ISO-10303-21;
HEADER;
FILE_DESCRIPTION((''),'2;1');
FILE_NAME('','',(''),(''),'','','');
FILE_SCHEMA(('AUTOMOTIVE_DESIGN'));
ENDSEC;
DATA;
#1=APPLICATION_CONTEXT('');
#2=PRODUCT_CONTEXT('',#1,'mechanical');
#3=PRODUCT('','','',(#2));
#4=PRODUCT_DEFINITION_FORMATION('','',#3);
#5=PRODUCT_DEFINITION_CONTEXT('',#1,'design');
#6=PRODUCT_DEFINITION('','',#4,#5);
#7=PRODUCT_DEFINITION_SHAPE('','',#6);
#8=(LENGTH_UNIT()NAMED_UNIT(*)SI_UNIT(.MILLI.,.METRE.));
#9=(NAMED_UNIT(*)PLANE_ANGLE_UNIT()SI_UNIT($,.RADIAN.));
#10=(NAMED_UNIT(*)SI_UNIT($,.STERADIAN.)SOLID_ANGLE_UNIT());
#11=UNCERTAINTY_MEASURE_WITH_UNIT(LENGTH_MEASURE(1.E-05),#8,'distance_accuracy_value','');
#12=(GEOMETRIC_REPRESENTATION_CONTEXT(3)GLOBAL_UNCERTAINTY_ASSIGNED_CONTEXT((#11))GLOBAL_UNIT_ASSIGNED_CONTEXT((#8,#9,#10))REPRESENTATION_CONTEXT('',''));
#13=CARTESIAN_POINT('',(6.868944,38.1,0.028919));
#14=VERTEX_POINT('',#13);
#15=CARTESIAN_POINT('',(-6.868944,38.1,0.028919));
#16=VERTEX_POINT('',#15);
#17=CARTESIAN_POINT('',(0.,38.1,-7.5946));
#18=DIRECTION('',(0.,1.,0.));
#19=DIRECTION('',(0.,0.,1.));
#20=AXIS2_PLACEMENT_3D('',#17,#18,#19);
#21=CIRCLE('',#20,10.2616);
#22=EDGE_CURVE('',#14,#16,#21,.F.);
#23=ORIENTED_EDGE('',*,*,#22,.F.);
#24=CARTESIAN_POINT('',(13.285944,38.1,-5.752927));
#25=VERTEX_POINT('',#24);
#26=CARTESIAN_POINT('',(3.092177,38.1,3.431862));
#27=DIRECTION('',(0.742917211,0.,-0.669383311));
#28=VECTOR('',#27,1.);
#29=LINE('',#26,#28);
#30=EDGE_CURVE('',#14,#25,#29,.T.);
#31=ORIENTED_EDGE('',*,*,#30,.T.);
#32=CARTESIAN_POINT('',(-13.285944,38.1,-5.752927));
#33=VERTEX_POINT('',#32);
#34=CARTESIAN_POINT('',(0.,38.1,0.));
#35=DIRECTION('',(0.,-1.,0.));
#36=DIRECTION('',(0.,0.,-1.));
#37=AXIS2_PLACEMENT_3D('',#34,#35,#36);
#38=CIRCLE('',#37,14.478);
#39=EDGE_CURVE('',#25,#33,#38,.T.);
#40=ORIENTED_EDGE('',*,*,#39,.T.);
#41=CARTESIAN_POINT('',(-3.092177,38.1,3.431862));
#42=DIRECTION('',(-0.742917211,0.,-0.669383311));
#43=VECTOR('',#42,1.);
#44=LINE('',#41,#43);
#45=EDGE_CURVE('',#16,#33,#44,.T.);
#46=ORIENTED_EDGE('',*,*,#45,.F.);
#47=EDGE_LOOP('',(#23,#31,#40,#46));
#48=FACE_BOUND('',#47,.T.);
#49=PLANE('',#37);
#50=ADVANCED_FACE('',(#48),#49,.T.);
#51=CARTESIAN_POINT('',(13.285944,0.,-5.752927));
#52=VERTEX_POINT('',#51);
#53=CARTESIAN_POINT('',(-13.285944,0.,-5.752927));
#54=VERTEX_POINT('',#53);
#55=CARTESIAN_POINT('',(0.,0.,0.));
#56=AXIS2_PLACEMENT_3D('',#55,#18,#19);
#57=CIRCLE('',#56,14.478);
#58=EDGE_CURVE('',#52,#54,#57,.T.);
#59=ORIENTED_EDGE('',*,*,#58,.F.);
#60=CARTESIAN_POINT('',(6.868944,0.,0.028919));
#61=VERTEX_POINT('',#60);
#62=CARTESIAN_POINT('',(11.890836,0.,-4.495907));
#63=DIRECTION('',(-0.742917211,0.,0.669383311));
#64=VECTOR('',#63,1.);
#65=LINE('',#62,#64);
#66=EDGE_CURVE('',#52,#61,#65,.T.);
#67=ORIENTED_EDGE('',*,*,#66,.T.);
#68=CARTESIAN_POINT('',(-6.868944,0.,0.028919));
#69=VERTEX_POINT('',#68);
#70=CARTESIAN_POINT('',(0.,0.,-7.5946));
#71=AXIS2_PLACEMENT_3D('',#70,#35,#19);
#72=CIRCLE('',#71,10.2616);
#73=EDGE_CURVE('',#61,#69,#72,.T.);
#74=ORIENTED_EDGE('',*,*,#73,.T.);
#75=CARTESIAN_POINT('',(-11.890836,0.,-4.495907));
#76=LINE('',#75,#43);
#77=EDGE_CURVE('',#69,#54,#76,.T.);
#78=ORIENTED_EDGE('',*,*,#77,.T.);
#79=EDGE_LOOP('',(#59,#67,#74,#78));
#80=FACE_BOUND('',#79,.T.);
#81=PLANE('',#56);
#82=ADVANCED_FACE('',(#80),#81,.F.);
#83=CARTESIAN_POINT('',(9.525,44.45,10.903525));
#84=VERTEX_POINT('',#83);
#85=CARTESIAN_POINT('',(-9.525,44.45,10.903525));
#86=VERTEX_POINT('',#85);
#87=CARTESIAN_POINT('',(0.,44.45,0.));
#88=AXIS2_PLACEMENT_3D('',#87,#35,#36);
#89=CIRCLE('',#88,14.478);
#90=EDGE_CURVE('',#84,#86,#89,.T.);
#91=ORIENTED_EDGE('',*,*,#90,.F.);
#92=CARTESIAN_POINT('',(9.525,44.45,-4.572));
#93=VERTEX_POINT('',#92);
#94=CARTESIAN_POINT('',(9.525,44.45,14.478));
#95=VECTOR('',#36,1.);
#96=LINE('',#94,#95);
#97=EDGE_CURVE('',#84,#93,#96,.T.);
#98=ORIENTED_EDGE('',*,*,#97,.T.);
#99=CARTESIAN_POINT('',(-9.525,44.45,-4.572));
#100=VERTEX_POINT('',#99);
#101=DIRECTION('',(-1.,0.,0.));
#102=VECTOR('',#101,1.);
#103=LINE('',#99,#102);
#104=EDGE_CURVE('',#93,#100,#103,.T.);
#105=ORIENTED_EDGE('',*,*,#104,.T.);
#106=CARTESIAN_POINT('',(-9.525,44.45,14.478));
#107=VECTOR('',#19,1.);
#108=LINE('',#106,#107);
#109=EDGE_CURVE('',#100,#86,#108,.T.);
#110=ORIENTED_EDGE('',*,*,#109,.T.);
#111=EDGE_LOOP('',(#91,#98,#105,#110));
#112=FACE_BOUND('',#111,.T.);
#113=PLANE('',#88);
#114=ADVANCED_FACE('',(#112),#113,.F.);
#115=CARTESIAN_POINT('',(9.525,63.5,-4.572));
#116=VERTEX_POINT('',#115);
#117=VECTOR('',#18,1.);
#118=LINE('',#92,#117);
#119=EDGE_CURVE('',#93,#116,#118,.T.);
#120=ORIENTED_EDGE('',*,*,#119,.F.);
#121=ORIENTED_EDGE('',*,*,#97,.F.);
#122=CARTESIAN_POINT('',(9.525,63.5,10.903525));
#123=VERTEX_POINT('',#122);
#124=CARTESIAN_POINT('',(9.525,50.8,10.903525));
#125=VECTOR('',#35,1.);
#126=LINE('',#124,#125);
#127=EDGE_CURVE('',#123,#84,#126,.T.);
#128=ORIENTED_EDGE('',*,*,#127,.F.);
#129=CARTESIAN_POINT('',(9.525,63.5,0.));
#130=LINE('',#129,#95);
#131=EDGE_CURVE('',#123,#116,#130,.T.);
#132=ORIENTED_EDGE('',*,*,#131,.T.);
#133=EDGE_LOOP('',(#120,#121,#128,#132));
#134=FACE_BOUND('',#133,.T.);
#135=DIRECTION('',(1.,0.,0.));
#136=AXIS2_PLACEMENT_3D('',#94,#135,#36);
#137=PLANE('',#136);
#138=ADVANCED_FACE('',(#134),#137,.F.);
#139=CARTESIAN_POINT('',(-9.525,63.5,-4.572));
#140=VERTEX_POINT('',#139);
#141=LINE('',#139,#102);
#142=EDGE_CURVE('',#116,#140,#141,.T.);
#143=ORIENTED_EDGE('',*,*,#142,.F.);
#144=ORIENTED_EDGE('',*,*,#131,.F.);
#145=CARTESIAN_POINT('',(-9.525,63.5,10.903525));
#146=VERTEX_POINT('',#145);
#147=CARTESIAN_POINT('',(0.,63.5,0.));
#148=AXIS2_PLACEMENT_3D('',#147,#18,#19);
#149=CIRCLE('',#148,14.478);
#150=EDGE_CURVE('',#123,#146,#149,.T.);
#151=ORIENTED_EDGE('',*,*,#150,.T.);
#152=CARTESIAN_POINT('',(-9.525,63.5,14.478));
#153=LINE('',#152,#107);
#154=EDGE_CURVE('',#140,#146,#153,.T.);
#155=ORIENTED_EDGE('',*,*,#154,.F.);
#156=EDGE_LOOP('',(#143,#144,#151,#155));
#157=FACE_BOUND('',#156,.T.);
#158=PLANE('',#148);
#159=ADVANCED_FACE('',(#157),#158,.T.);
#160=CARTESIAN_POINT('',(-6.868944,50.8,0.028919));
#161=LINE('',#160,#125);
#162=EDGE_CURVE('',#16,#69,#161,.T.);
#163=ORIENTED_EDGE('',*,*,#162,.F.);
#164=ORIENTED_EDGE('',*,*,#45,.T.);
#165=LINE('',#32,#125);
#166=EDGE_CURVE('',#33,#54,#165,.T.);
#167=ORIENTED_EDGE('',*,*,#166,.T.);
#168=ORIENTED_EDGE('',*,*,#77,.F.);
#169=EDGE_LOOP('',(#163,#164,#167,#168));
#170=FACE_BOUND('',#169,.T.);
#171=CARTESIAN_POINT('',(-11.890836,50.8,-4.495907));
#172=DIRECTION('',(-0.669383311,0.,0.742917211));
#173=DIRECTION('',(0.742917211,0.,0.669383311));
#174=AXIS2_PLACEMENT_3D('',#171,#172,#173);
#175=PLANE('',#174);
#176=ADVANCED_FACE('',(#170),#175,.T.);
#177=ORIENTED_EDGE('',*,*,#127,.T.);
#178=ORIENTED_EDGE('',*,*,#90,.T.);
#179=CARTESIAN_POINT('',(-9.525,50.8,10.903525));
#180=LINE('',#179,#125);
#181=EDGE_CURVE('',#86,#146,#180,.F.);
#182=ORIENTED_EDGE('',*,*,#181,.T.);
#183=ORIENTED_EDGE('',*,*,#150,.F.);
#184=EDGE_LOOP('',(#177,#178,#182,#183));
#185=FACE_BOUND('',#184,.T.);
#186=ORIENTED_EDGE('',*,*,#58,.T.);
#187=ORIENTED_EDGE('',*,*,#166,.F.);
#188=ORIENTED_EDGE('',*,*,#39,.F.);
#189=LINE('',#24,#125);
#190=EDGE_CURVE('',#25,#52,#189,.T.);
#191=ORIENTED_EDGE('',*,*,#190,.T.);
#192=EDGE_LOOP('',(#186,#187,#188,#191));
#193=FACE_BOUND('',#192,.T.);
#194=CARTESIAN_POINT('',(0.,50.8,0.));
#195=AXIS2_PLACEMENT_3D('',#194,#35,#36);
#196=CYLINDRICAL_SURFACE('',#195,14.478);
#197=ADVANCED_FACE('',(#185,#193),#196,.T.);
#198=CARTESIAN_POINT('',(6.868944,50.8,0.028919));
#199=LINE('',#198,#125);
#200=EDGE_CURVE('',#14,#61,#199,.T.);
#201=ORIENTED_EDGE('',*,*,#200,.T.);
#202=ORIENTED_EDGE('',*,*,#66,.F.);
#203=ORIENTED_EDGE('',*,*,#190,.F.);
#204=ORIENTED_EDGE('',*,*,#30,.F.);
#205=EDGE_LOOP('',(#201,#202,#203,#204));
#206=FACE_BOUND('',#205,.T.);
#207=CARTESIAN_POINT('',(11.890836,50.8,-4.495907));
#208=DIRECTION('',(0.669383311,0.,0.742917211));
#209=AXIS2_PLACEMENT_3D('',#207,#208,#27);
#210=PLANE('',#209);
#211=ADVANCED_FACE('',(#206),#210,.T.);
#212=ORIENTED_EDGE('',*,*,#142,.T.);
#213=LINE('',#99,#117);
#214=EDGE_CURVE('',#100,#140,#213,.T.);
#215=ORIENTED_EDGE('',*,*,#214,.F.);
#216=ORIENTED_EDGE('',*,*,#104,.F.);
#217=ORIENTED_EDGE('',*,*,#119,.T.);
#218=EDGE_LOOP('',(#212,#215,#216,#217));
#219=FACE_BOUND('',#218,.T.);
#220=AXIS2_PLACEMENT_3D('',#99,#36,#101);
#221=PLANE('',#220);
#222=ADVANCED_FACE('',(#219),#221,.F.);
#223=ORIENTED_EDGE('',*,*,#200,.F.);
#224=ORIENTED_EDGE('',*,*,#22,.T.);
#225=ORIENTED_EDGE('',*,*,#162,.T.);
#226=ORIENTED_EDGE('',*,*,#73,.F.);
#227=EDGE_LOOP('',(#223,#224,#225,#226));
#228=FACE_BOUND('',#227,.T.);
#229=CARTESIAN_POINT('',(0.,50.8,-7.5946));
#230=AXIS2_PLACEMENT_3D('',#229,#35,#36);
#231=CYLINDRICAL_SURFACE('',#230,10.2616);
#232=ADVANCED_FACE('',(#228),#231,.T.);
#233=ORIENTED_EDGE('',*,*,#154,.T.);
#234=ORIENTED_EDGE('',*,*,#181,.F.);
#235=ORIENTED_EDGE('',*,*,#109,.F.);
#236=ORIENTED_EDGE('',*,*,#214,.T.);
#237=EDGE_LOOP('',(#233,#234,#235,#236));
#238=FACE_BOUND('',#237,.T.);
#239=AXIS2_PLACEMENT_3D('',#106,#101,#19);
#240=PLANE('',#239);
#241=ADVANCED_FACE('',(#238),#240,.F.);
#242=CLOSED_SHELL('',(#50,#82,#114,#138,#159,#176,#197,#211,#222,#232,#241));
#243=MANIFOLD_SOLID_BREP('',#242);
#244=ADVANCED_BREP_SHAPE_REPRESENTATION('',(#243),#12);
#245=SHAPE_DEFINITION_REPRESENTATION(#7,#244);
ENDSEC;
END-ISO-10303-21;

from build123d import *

# Parameters (mm, degrees)
SKETCH2_R                = 14.478
BOSS_EXTRUDE1_DEPTH      = 50.8
CUT_EXTRUDE3_DEPTH       = 38.1
BOSS_EXTRUDE2_DEPTH      = 12.7
BOSS_EXTRUDE2_DEPTH_BACK = 12.7
SKETCH16_R               = 14.478
SKETCH17_W               = 19.05
SKETCH17_H               = 19.05
CUT_EXTRUDE4_DEPTH       = 19.05


with BuildPart() as part:
    # Sketch2 → Boss-Extrude1 (new body)
    with BuildSketch(Plane(origin=(0, 0, 0), x_dir=(1, 0, 0), z_dir=(0, 1, 0))):
        Circle(SKETCH2_R)
        with BuildLine():
            Line((-13.081, 3.175), (-8.059107313, -1.349826056))
            ThreePointArc((-8.059107313, -1.349826056), (0, -4.445), (8.059107313, -1.349826056))
            Line((8.059107313, -1.349826056), (13.081, 3.175))
            ThreePointArc((13.081, 3.175), (13.146371637, 4.430535164), (11.890836473, 4.495906802))
            Line((11.890836473, 4.495906802), (6.868943786, -0.028919255))
            ThreePointArc((6.868943786, -0.028919255), (0, -2.667), (-6.868943786, -0.028919255))
            Line((-6.868943786, -0.028919255), (-11.890836473, 4.495906802))
            ThreePointArc((-11.890836473, 4.495906802), (-13.146371637, 4.430535164), (-13.081, 3.175))
        make_face(mode=Mode.SUBTRACT)
    extrude(amount=BOSS_EXTRUDE1_DEPTH)

    # Sketch15 → Cut-Extrude3 (cut)
    with BuildSketch(Plane.XZ):
        with BuildLine():
            ThreePointArc((13.081, -3.175), (13.146371637, -4.430535164), (11.890836473, -4.495906802))
            Line((11.890836473, -4.495906802), (13.285944291, -5.752926933))
            ThreePointArc((13.285944291, -5.752926933), (14.176854119, -2.937565536), (14.478, 0))
            ThreePointArc((14.478, 0), (-2.937565536, 14.176854119), (-13.285944291, -5.752926933))
            Line((-13.285944291, -5.752926933), (-11.890836473, -4.495906802))
            ThreePointArc((-11.890836473, -4.495906802), (-13.146371637, -4.430535164), (-13.081, -3.175))
            Line((-13.081, -3.175), (-8.059107313, 1.349826056))
            ThreePointArc((-8.059107313, 1.349826056), (0, 4.445), (8.059107313, 1.349826056))
            Line((8.059107313, 1.349826056), (13.081, -3.175))
        make_face()
    extrude(amount=-CUT_EXTRUDE3_DEPTH, mode=Mode.SUBTRACT)

    # Sketch16 → Boss-Extrude2 (add, two sides: drawn at the far end of the back side and taken through both)
    with BuildSketch(Plane(origin=(0, 50.8, 0), x_dir=(1, 0, 0), z_dir=(0, 1, 0)).offset(-BOSS_EXTRUDE2_DEPTH_BACK)):
        Circle(SKETCH16_R)
    extrude(amount=BOSS_EXTRUDE2_DEPTH + BOSS_EXTRUDE2_DEPTH_BACK)

    # Sketch17 → Cut-Extrude4 (cut)
    with BuildSketch(Plane(origin=(0, 63.5, 0), x_dir=(1, 0, 0), z_dir=(0, 1, 0))):
        with Locations((0, -4.953)):
            Rectangle(SKETCH17_W, SKETCH17_H)
    extrude(amount=-CUT_EXTRUDE4_DEPTH, mode=Mode.SUBTRACT)


solid = part.part
